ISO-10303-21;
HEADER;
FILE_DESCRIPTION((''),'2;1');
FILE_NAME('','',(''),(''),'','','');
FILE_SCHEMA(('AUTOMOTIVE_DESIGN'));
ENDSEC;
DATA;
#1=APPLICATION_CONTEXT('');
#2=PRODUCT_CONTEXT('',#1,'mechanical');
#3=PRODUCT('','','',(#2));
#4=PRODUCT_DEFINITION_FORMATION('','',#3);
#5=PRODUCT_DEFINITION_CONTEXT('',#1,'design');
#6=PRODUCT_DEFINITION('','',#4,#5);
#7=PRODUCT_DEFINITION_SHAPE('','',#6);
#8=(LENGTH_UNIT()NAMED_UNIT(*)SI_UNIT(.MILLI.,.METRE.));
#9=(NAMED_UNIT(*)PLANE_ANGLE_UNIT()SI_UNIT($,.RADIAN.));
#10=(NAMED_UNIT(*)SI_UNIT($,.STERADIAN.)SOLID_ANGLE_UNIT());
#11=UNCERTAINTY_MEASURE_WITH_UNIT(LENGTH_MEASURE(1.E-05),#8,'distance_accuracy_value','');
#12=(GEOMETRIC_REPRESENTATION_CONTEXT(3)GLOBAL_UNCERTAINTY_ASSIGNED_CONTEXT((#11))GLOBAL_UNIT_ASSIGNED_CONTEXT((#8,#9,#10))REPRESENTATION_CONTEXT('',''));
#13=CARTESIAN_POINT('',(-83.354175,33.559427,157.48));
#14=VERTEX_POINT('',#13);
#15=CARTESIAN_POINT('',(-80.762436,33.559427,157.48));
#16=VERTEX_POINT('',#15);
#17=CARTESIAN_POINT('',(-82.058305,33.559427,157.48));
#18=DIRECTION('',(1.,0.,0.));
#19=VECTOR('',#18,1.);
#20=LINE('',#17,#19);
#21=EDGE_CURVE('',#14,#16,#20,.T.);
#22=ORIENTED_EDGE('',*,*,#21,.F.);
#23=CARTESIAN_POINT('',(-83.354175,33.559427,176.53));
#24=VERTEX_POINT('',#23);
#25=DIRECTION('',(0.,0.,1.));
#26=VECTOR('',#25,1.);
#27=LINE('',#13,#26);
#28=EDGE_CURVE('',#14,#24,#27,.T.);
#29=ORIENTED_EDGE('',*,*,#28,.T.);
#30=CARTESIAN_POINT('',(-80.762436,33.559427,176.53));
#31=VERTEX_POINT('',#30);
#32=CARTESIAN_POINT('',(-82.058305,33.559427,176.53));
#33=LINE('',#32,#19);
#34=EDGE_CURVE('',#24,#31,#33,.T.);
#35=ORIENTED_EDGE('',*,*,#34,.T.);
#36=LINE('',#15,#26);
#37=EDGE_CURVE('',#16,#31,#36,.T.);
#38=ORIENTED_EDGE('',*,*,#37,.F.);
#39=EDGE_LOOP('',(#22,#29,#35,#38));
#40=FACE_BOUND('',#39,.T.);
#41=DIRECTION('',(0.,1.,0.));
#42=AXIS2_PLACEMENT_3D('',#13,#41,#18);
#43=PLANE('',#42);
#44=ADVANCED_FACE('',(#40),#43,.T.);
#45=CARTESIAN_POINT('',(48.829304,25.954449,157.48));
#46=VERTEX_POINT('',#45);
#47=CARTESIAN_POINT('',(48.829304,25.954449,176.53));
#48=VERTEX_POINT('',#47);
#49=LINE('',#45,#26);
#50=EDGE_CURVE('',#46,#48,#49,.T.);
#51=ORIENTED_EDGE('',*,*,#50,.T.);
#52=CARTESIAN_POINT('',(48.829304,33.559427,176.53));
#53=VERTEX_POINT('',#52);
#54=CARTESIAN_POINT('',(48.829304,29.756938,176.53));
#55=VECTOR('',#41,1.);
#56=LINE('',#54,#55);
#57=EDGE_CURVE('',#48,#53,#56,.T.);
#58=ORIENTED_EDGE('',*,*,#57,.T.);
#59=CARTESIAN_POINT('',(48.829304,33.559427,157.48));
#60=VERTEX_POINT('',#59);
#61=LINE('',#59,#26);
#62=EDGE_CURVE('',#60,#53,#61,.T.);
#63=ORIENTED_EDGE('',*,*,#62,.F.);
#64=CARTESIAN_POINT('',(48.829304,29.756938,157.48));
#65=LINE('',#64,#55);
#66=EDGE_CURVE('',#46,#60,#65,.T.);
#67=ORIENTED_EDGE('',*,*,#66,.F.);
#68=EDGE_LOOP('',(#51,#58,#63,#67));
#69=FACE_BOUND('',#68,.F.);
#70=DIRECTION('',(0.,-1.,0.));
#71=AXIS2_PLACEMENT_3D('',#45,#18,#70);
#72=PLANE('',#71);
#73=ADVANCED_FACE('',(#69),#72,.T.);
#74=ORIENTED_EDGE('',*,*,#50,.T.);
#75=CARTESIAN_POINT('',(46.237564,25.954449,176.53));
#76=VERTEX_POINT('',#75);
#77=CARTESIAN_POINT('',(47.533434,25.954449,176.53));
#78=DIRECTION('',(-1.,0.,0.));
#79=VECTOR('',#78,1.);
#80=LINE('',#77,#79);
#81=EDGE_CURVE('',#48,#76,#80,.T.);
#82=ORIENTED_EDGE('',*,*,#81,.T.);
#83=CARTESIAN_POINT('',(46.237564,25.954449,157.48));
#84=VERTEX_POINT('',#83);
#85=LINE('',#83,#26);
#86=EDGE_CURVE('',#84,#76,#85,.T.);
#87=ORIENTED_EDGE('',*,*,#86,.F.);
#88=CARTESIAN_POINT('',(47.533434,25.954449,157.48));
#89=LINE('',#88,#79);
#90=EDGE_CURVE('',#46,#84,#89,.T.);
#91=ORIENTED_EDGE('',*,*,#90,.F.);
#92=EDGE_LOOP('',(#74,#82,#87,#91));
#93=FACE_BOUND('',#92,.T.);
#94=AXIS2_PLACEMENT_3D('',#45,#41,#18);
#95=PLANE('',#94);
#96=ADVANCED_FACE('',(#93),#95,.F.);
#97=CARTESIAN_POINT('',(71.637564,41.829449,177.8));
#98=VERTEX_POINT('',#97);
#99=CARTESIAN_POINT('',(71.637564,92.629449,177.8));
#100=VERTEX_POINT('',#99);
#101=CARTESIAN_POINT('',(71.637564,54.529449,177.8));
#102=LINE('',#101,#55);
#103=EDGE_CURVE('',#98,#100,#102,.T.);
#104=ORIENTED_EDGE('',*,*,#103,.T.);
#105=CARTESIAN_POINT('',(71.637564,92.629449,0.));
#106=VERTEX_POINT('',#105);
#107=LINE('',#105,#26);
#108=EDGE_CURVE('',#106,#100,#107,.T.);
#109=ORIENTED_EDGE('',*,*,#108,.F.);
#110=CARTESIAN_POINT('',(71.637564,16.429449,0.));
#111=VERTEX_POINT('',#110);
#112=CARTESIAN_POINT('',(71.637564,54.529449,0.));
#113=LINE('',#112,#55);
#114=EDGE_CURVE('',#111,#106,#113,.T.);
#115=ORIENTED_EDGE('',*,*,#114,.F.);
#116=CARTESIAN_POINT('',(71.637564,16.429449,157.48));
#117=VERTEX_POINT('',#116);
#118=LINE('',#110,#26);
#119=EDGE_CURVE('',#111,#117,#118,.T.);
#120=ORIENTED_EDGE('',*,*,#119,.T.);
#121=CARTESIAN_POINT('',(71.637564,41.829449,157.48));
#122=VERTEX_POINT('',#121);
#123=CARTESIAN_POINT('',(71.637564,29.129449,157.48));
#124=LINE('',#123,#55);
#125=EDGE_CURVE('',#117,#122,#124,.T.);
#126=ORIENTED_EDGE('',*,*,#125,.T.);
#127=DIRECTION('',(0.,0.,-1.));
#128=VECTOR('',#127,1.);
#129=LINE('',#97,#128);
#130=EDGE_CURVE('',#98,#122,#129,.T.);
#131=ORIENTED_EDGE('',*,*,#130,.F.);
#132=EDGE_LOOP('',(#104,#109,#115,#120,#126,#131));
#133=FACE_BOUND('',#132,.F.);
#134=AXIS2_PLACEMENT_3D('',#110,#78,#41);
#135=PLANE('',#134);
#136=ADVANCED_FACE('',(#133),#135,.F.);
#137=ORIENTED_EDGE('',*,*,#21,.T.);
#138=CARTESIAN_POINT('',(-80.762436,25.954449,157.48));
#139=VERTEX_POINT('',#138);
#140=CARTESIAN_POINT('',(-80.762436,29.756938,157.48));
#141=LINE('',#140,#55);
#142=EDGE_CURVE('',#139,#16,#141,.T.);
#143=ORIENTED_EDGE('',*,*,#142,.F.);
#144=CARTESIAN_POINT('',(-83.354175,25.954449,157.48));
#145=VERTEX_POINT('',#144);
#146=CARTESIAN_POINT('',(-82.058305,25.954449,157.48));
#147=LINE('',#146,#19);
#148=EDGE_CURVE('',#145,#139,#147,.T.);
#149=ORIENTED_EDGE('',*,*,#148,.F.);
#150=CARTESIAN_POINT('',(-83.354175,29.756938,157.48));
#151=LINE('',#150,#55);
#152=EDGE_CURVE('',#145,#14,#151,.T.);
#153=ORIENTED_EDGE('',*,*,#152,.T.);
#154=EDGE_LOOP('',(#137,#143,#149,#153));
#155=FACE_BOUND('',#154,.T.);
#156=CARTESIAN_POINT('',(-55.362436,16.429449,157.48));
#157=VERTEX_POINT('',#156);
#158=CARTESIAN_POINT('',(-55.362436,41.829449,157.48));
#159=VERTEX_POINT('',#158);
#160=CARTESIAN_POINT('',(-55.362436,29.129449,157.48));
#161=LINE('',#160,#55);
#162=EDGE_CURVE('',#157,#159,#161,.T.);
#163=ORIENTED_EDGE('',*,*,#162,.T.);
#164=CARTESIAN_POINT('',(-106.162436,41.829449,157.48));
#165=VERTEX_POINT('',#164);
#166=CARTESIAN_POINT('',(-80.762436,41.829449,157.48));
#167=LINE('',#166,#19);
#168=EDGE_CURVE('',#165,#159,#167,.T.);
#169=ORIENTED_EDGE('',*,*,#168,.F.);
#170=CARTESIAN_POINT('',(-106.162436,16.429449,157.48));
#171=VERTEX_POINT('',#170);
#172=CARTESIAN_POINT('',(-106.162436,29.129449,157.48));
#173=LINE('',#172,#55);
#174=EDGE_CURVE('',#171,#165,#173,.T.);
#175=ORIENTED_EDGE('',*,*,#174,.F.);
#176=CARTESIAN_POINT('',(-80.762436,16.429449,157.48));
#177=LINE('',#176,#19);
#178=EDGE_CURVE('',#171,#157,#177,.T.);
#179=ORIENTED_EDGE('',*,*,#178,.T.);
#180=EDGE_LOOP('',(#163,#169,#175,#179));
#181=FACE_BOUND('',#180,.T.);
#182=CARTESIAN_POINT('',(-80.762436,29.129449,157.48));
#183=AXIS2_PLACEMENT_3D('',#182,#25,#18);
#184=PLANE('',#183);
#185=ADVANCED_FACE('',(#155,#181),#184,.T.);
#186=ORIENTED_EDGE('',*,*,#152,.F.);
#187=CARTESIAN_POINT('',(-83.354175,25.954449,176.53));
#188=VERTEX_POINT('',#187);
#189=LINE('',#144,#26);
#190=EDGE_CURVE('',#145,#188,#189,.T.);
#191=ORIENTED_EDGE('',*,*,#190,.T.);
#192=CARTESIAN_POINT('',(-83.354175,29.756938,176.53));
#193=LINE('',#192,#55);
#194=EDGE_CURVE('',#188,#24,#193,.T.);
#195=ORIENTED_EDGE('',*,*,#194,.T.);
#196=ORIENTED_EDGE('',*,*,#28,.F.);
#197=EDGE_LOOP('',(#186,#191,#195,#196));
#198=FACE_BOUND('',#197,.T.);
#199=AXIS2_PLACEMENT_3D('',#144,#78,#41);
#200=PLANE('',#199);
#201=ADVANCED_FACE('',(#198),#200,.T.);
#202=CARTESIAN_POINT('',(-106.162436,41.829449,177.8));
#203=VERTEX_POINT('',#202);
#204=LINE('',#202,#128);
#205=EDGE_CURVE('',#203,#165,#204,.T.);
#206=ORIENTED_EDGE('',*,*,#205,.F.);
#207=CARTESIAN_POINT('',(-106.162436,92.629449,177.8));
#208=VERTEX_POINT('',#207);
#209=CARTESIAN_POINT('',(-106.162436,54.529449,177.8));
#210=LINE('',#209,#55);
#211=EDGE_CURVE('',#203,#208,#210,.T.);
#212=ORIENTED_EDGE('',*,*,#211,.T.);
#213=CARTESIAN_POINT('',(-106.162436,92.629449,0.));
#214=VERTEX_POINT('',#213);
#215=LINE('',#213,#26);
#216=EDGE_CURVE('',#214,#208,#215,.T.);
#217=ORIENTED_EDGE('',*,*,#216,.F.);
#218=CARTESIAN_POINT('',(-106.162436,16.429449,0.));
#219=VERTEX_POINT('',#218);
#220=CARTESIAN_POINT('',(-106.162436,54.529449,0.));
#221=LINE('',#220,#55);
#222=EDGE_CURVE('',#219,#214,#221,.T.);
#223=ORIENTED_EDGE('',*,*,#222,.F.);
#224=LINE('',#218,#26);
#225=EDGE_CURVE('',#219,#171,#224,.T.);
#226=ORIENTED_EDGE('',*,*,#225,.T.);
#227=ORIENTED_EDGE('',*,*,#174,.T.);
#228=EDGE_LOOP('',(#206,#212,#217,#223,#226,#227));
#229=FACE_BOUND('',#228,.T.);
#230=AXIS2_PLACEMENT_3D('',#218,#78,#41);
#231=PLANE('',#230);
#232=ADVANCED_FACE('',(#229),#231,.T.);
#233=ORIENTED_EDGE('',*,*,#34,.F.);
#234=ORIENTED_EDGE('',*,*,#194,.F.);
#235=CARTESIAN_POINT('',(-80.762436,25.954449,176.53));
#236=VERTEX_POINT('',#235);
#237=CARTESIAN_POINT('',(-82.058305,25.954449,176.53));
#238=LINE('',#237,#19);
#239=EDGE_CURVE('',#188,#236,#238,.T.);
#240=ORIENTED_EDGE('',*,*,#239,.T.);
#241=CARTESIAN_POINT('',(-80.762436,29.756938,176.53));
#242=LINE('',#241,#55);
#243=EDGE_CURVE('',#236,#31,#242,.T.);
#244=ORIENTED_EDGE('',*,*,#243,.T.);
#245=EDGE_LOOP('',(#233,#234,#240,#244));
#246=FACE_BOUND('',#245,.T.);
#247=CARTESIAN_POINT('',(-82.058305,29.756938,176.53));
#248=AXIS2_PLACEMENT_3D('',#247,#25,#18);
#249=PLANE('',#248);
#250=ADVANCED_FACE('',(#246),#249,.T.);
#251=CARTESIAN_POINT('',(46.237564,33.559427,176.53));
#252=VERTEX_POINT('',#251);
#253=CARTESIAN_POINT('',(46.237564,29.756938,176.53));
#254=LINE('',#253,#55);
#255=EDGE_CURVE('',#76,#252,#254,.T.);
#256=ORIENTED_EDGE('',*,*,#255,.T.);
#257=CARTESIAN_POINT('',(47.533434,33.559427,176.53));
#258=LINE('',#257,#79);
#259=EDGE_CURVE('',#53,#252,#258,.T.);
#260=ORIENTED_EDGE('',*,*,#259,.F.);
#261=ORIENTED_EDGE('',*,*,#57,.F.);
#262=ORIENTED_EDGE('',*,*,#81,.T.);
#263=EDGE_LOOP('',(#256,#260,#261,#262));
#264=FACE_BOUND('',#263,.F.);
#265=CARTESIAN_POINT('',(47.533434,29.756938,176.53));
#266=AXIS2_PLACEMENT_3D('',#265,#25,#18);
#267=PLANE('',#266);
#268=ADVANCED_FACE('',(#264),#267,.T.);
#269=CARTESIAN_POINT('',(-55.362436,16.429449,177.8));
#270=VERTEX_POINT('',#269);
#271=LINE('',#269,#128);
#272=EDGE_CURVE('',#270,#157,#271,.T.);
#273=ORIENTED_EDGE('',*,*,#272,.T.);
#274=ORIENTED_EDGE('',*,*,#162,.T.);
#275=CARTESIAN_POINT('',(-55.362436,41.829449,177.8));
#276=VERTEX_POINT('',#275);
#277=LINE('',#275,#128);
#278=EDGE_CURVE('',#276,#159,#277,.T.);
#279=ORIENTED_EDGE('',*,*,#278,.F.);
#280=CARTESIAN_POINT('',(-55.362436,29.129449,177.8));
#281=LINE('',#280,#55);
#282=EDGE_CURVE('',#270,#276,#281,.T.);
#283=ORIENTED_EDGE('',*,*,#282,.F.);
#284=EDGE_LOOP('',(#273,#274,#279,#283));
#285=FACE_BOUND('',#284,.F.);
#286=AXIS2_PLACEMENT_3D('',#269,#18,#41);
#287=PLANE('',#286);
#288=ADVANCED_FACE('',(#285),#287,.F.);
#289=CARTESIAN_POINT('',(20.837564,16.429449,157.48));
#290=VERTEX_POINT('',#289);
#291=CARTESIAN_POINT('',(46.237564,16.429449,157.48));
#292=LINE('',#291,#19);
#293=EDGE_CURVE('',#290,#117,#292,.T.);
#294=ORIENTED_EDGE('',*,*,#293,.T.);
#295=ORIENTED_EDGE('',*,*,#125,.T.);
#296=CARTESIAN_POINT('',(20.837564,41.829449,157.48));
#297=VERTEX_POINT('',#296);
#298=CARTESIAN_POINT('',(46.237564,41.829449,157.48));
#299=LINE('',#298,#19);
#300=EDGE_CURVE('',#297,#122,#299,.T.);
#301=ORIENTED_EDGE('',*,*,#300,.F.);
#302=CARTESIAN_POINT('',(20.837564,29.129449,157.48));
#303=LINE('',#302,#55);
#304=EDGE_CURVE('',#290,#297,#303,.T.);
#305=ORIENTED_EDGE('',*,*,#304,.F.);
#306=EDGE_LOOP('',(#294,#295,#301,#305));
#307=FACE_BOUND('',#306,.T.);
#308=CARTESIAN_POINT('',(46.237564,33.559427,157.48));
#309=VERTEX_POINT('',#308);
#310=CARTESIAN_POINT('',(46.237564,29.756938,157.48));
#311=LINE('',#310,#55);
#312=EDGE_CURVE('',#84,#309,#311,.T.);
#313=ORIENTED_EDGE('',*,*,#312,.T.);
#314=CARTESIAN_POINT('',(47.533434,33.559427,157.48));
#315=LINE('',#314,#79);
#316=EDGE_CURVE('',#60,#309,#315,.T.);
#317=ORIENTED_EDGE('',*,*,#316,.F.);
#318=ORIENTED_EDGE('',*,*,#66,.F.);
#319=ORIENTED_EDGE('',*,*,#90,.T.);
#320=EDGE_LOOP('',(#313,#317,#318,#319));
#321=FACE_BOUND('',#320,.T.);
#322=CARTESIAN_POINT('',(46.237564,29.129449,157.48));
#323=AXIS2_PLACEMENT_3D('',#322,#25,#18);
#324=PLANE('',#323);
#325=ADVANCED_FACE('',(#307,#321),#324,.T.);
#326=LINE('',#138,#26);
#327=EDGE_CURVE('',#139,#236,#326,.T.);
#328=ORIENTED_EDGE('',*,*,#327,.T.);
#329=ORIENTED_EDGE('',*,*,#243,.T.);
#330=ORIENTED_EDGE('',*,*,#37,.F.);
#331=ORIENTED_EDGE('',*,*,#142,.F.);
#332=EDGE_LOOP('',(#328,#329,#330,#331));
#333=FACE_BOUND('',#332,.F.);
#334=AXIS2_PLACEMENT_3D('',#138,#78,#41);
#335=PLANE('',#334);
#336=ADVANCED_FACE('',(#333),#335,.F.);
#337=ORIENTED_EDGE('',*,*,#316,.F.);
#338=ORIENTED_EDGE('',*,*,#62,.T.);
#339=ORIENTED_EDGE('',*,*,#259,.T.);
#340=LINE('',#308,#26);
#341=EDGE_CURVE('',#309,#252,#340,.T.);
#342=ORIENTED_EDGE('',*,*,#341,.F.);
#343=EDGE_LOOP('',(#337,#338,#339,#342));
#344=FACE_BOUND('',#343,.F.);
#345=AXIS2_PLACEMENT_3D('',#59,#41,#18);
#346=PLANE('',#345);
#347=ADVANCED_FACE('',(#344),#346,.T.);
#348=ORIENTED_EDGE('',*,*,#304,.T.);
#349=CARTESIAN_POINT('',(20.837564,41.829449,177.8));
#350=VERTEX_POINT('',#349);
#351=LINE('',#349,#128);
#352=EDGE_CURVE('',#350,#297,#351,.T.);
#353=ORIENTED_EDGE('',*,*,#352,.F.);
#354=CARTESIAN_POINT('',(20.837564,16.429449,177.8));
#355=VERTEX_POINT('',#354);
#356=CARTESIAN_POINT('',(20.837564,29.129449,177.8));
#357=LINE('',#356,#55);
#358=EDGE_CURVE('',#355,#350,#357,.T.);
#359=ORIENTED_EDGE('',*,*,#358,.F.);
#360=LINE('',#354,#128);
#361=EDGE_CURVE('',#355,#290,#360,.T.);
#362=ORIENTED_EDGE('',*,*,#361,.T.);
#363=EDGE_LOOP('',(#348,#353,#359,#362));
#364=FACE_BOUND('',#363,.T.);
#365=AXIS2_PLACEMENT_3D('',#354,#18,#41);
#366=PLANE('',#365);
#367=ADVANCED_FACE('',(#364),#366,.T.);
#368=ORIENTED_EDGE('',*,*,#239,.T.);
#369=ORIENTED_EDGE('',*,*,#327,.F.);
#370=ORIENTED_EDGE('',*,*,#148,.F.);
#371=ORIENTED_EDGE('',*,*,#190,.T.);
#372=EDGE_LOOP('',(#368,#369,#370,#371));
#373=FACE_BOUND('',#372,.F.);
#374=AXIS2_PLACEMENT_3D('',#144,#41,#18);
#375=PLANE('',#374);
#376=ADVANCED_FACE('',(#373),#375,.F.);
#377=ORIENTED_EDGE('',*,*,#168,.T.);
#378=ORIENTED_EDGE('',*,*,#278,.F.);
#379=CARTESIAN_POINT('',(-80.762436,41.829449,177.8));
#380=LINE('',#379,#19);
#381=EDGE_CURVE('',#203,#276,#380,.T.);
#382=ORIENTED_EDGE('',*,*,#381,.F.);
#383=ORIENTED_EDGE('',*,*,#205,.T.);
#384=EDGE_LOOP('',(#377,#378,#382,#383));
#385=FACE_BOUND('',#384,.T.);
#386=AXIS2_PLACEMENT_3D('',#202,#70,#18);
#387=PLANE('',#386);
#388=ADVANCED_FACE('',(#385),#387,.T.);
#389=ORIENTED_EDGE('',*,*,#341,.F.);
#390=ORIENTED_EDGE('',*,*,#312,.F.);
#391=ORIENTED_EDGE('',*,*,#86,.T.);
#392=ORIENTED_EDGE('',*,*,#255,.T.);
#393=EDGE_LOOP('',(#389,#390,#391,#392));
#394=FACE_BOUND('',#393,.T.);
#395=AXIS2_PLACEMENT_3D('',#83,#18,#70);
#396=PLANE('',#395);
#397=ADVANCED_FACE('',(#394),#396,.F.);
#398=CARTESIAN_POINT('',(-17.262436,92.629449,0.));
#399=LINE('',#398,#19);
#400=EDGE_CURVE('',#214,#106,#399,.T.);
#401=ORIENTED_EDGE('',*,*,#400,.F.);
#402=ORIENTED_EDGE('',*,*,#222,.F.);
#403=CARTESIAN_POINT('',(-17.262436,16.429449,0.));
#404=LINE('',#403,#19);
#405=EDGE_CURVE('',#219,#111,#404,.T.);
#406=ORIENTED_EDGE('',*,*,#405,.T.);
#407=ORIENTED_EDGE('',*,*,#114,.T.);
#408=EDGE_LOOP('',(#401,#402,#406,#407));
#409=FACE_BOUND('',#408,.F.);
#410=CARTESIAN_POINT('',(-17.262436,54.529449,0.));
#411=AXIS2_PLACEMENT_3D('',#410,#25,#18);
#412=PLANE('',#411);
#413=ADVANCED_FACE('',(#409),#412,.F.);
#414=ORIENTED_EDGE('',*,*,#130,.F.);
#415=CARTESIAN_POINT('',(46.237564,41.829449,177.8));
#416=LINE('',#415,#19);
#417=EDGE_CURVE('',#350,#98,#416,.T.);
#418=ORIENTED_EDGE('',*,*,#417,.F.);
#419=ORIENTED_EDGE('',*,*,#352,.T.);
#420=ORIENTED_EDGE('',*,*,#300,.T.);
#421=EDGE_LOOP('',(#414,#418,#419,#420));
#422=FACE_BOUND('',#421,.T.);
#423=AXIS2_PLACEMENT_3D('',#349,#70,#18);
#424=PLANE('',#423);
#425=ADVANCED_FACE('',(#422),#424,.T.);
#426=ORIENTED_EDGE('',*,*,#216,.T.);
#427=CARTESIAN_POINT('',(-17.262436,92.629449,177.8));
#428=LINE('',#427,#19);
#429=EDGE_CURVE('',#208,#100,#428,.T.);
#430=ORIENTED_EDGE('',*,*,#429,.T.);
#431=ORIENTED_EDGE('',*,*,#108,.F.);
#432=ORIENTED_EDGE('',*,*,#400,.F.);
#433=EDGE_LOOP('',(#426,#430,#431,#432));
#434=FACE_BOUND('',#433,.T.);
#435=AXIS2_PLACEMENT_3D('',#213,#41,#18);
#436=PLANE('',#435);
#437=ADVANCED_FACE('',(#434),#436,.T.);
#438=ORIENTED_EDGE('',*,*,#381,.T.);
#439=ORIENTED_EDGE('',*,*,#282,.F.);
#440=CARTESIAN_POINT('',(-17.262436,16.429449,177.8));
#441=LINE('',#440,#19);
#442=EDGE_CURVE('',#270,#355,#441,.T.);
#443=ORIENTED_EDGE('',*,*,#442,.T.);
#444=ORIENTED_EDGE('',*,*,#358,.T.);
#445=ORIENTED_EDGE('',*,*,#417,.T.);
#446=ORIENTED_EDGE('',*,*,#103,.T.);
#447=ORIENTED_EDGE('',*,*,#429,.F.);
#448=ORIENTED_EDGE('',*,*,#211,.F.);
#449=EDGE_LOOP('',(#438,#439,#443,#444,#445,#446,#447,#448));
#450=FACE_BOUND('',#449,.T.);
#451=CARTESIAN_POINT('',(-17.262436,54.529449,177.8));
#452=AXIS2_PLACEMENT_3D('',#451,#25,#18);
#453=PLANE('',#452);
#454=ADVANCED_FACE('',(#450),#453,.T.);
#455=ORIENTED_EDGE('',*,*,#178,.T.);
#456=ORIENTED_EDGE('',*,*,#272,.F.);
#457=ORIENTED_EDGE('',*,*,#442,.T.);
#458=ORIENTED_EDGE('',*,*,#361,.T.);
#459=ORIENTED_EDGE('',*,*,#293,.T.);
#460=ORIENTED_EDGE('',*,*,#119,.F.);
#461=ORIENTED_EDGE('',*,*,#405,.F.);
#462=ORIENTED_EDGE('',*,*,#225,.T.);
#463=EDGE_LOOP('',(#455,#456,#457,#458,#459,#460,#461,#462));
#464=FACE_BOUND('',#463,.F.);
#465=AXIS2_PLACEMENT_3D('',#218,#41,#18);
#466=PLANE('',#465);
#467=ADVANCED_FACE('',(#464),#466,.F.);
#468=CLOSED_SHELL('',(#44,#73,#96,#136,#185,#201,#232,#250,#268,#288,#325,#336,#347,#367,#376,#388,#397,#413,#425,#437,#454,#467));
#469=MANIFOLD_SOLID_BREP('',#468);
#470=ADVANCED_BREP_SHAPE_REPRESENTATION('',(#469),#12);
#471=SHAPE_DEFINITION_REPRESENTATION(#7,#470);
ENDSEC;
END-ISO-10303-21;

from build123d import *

# Parameters (mm, degrees)
F0_W     = 177.8
F0_H     = 76.2
F1_DEPTH = 177.8
F2_W     = 50.8
F2_H     = 25.4
F3_DEPTH = 20.32
F4_W     = 2.5917394697
F4_H     = 7.6049772211
F5_DEPTH = 19.05


# Not quite as in the source:
# - a length typed as a fraction of an inch, garbled in the dataset ("3 / 203.2 mm" for 3/8 in), is restored


with BuildPart() as f1:
    # F0 (on Top) → F1 (new body)
    with BuildSketch(Plane.XY):
        with Locations((-17.2624356211, 54.5294494442)):
            Rectangle(F0_W, F0_H)
    extrude(amount=F1_DEPTH)

    # F2 (on face) → F3 (cut)
    with BuildSketch(Plane.XY.offset(177.8)):
        with Locations((-80.7624356211, 29.1294494442)):
            Rectangle(F2_W, F2_H)
        with Locations((46.2375643789, 29.1294494442)):
            Rectangle(F2_W, F2_H)
    extrude(amount=-F3_DEPTH, mode=Mode.SUBTRACT)

    # F4 (on face) → F5 (join)
    with BuildSketch(Plane.XY.offset(157.48)):
        with Locations((-82.0583053559, 29.7569380547)):
            Rectangle(F4_W, F4_H)
    extrude(amount=F5_DEPTH)

    # F7: F1 across plane


with BuildPart() as f1_1:
    add(f1.part)
    add(f1.part.mirror(Plane(origin=(-17.2624356211, 55.5353900382, 85.7815841584), x_dir=(0, -1, 0), z_dir=(-1, 0, 0))))


solid = f1_1.part
